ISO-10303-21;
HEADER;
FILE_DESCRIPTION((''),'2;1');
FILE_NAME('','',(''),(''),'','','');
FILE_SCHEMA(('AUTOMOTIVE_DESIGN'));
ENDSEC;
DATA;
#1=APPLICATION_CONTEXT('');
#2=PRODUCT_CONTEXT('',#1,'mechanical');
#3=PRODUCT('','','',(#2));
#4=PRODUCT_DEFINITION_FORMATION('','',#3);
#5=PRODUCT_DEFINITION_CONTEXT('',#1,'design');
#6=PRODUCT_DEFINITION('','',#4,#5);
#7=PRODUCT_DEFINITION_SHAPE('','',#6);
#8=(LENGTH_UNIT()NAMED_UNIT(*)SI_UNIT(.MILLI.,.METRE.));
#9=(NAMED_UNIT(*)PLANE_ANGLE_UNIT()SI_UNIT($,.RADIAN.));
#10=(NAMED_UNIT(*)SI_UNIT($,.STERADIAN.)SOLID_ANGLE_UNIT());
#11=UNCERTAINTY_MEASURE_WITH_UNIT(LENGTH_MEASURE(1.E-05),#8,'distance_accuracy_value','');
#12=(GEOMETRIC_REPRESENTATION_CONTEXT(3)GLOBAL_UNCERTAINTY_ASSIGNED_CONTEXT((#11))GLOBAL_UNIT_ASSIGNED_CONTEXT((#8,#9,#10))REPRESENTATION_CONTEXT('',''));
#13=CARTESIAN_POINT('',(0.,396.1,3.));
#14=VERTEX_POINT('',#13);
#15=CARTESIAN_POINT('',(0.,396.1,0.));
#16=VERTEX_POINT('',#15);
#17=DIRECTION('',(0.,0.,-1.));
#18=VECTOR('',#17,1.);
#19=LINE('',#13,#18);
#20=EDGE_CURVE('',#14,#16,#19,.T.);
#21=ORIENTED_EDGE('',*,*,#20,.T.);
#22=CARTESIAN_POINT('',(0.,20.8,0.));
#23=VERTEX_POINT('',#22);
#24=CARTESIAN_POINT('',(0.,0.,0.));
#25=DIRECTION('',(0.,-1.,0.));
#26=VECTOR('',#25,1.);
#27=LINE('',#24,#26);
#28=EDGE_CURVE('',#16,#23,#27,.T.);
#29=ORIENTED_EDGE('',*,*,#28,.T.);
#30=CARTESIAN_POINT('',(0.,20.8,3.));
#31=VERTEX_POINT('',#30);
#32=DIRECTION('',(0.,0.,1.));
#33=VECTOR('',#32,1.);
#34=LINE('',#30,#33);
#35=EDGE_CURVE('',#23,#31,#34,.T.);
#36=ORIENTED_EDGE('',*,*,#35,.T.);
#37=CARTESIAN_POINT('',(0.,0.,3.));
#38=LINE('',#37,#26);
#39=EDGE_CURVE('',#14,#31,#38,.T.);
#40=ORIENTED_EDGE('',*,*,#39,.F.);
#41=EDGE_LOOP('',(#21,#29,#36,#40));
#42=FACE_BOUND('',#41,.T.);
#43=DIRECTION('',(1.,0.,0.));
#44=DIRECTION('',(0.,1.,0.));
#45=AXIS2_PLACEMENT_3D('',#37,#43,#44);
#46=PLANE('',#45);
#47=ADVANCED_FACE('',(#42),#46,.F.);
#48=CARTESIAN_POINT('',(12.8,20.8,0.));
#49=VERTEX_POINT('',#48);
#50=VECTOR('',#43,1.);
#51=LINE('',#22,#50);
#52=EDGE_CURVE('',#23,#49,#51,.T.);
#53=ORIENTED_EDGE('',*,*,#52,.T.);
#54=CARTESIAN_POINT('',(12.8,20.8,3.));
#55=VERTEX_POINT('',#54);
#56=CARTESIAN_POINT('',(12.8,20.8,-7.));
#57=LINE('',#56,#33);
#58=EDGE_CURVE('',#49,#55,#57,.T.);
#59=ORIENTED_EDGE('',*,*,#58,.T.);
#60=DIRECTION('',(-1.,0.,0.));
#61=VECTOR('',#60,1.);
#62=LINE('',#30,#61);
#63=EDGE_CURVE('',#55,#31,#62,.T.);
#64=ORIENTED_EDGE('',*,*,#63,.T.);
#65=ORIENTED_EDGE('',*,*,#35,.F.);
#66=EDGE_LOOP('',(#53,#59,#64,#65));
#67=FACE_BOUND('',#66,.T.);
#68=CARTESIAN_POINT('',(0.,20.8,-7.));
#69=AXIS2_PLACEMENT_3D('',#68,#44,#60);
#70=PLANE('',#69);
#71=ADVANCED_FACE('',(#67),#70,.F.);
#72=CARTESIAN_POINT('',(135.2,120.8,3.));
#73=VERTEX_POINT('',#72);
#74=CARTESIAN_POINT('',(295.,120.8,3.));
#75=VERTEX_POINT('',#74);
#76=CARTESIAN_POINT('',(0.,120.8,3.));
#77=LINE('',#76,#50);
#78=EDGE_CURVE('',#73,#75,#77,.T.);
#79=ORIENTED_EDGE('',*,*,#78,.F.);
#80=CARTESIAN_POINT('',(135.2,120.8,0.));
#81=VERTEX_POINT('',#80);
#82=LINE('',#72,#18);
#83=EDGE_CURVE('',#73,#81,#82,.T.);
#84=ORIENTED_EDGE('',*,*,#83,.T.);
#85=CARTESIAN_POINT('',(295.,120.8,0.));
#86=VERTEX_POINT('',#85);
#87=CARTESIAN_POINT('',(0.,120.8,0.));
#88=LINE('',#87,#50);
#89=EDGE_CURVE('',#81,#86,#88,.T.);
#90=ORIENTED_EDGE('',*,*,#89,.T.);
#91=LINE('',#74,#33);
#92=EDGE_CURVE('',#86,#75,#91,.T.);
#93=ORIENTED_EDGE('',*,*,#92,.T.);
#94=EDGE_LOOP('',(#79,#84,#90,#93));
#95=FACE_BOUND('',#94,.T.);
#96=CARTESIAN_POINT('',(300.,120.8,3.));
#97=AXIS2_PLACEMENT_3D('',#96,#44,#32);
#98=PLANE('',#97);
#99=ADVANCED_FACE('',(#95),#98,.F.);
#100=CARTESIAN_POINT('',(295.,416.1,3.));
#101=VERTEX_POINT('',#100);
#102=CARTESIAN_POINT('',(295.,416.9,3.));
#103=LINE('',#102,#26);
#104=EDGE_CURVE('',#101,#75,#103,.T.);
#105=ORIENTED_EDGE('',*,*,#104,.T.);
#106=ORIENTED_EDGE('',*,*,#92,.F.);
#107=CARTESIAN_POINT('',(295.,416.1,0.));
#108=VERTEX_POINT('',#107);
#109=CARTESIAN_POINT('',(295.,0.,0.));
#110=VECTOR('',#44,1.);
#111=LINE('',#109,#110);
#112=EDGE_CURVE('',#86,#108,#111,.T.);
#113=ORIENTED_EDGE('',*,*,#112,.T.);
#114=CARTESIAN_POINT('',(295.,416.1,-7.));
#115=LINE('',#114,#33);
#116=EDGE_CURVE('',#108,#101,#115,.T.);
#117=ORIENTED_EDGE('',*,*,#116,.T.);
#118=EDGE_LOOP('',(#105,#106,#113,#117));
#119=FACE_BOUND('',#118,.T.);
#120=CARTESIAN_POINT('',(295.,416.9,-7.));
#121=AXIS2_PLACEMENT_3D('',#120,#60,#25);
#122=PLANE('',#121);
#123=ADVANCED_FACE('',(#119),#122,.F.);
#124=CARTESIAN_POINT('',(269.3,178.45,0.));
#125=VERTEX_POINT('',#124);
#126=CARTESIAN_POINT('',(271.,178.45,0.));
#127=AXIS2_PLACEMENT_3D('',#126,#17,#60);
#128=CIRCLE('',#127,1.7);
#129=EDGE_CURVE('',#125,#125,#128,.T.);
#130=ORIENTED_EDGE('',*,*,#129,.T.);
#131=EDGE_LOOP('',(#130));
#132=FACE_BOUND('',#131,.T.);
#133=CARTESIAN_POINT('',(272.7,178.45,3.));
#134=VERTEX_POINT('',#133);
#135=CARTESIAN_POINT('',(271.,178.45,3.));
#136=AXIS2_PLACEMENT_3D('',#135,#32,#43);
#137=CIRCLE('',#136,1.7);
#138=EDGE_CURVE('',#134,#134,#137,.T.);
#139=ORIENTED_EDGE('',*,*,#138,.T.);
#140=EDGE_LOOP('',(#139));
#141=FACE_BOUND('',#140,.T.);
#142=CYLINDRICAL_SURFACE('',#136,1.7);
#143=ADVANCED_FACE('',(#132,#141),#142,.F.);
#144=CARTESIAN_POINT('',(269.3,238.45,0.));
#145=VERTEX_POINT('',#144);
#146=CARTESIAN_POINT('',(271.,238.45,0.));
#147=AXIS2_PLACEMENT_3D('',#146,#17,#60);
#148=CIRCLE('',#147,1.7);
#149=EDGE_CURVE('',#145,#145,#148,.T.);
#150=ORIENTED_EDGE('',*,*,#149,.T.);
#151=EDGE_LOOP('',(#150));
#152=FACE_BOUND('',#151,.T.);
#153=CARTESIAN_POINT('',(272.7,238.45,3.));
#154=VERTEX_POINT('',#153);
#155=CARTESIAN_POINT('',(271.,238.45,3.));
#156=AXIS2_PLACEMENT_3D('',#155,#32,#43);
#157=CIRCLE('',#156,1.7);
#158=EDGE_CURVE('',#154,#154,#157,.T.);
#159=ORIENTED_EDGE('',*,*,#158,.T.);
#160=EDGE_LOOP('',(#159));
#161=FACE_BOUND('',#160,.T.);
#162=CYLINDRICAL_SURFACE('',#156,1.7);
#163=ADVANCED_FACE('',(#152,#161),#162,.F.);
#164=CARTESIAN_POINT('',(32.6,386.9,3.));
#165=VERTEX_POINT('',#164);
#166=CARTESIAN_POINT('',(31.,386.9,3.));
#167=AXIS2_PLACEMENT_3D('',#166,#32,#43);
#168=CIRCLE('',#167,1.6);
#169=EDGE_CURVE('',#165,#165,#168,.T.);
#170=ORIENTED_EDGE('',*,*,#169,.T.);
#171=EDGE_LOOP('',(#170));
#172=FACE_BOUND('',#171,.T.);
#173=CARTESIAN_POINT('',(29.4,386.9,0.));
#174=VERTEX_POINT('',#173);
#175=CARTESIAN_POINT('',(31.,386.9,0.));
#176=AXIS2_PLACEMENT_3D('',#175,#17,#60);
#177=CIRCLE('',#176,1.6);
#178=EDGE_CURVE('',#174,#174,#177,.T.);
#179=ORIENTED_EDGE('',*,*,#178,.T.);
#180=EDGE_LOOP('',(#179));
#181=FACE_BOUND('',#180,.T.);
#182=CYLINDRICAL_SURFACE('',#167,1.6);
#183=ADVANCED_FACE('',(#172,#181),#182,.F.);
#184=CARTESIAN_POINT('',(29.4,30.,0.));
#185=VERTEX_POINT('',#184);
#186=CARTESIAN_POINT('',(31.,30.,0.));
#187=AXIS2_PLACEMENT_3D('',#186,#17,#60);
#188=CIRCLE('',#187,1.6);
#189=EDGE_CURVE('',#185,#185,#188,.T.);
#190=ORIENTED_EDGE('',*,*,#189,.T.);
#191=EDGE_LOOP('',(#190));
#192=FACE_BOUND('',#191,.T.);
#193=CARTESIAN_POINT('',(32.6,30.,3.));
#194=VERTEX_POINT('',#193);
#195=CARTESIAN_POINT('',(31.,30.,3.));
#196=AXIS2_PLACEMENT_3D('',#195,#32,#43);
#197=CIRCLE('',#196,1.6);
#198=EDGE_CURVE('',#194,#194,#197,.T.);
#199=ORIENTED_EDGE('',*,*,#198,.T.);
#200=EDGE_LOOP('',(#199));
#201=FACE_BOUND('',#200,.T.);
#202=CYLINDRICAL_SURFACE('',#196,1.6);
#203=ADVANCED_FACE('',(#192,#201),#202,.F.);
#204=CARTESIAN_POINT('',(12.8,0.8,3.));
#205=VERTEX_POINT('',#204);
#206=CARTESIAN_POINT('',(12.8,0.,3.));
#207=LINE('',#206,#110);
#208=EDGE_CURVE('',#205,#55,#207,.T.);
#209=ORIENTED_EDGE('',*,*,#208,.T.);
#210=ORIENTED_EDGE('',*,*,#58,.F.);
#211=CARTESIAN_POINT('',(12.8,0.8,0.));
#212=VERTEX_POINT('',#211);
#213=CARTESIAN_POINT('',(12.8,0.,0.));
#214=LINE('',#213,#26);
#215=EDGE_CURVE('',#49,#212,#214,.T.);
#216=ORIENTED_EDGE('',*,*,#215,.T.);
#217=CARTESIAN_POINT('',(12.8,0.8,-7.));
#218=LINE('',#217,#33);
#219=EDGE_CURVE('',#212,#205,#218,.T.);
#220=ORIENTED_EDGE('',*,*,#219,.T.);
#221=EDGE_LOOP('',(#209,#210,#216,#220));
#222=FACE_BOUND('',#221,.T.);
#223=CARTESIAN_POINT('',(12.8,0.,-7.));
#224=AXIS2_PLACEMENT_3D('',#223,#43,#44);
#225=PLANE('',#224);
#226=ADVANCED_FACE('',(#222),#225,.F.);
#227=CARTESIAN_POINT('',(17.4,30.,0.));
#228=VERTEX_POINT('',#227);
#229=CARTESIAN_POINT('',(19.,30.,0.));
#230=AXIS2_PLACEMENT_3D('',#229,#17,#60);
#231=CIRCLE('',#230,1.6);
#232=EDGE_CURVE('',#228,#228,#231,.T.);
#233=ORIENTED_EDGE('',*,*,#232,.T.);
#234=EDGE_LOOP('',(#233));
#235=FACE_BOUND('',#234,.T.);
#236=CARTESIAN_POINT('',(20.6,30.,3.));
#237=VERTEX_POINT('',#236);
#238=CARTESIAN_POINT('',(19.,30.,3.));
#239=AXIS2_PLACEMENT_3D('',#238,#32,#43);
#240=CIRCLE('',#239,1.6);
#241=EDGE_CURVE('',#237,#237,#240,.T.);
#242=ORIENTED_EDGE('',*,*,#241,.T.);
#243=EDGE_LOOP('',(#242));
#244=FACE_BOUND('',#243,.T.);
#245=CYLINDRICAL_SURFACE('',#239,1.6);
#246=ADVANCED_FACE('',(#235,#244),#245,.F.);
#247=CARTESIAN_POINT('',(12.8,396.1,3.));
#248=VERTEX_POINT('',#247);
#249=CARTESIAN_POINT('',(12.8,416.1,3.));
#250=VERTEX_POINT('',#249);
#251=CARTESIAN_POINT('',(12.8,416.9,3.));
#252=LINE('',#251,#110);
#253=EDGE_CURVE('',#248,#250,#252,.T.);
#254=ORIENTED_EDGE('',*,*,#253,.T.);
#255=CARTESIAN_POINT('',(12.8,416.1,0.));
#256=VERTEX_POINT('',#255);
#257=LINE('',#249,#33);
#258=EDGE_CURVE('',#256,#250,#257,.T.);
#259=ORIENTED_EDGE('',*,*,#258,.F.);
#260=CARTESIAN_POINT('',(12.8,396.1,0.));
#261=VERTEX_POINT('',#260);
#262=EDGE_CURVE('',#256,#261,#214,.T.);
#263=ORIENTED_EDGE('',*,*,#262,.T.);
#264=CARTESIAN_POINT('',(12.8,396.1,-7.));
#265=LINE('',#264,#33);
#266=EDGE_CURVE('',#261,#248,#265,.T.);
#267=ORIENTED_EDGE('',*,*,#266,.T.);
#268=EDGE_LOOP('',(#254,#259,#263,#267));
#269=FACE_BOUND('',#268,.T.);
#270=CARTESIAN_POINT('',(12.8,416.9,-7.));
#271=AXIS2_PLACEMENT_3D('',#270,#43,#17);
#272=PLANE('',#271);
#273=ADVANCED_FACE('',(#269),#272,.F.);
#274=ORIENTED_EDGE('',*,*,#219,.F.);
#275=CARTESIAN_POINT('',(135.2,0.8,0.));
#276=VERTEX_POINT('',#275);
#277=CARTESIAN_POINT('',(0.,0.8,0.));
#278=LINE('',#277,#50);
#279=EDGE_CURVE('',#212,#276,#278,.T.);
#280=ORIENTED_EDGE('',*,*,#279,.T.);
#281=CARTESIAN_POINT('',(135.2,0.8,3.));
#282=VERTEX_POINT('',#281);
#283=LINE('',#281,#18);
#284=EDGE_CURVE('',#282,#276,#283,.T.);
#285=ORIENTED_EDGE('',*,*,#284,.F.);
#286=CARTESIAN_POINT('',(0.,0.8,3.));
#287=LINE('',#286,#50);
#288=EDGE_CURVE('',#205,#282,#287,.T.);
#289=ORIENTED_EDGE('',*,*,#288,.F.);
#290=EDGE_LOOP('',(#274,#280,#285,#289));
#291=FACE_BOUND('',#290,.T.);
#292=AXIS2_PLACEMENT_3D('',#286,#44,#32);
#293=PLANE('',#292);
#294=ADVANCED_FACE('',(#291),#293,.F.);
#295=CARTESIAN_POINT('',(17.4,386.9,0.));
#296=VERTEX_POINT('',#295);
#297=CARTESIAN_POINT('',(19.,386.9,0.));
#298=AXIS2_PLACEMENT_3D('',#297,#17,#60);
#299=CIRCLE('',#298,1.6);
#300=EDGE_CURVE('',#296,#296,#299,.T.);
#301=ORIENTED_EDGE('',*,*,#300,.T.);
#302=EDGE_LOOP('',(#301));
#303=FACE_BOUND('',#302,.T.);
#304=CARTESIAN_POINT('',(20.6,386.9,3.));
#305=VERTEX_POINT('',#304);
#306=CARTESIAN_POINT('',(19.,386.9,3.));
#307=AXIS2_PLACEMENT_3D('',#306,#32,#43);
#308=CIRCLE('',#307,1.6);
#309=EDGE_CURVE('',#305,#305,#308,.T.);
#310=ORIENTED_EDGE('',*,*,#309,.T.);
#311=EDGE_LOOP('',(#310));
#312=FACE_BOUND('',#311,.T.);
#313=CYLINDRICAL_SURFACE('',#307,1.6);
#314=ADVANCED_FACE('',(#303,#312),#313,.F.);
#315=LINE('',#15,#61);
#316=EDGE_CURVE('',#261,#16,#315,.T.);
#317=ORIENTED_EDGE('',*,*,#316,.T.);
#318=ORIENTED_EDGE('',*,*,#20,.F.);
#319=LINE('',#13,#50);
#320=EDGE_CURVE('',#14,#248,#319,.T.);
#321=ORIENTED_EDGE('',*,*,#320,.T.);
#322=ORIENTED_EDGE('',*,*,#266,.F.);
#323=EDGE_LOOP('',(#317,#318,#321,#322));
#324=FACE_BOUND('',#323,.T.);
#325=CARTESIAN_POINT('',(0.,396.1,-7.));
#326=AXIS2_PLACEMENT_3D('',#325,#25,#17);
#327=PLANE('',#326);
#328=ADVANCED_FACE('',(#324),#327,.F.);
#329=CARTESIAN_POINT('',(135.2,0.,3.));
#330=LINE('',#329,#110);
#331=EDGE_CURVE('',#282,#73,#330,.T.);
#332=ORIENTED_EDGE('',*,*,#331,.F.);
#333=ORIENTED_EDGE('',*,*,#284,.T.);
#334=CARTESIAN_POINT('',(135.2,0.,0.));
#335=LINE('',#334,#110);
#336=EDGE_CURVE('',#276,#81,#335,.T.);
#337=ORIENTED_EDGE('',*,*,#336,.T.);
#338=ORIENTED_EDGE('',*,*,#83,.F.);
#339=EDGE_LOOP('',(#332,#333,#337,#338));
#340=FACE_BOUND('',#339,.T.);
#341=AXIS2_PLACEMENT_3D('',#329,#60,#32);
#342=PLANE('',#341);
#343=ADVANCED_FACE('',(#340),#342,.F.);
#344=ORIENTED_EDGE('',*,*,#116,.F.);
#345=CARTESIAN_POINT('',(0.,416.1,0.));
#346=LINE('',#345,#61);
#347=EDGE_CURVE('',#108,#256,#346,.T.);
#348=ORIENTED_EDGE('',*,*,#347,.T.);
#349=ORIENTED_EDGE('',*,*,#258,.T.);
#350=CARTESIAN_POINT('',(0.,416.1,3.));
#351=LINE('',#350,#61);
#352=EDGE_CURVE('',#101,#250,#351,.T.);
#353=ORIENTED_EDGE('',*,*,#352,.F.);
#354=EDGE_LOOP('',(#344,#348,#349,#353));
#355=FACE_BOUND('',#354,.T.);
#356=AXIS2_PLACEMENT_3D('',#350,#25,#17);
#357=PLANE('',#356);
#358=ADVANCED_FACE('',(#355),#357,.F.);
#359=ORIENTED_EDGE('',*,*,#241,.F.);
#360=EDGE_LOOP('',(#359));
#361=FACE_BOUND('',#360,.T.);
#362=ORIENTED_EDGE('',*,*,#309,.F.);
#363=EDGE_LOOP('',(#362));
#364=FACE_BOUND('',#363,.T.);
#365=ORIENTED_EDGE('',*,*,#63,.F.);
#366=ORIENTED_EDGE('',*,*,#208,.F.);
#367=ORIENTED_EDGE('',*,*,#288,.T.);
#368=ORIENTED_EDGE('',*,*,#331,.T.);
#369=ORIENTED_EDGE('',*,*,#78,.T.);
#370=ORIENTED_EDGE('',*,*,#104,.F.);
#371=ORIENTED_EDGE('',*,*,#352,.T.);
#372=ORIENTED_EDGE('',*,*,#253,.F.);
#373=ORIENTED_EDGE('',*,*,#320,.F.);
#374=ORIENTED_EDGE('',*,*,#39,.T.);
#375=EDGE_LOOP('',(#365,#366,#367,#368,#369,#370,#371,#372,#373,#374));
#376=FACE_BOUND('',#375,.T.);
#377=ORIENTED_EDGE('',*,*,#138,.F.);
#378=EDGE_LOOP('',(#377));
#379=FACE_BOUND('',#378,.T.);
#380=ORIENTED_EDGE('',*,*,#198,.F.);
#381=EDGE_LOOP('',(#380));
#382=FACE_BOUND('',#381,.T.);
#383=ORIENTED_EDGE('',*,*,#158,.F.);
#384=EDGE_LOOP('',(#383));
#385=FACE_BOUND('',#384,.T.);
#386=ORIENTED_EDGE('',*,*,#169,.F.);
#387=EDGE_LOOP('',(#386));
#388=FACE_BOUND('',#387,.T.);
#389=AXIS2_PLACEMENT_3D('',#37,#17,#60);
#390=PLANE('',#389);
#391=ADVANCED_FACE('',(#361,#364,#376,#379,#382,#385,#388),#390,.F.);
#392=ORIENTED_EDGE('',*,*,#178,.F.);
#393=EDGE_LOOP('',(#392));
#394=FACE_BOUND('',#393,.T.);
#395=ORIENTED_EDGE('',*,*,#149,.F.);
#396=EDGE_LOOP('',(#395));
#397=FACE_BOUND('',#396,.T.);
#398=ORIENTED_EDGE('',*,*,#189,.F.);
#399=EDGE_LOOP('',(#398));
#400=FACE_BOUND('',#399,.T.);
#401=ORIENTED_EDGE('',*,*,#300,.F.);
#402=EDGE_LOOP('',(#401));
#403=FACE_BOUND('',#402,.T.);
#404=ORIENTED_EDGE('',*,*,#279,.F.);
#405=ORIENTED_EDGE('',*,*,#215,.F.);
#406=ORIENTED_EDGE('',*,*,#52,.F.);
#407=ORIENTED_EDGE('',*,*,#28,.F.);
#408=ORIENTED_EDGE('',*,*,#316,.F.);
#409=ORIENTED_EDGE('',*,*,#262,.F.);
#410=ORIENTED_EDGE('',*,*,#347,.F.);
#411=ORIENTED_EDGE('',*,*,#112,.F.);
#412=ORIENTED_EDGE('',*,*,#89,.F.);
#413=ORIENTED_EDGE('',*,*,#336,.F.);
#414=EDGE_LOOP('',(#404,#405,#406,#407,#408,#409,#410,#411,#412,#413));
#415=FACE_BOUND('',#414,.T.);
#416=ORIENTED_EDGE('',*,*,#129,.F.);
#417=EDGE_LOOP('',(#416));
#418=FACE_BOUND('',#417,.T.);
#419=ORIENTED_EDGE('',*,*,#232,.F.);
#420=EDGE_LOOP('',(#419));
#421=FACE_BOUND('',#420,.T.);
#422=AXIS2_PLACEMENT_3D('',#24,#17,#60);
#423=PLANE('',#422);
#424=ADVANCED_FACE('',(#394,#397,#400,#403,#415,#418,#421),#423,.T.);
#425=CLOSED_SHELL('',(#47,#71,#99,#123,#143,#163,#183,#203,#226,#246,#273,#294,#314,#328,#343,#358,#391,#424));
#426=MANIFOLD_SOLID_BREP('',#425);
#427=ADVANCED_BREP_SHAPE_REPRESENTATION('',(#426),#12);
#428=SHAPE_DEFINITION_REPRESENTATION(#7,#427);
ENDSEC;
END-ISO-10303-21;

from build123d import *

# Parameters (mm, degrees)
BOSS_EXTRUDE1_DEPTH          = 3
SKETCH2_W                    = 10
SKETCH2_H                    = 416.9
BOSS_EXTRUDE2_DEPTH          = 0.1
CUT_EXTRUDE1_DEPTH           = 10
M3_CLEARANCE_HOLE1_OUTLINE_R = 1.6
M3_CLEARANCE_HOLE1_DEPTH     = 3
M3_CLEARANCE_HOLE2_OUTLINE_R = 1.7
M3_CLEARANCE_HOLE2_DEPTH     = 3
SKETCH6_W                    = 5
SKETCH6_H                    = 296.9
CUT_EXTRUDE2_DEPTH           = 10
MOVE_FACE1_BY                = 0.8
MOVE_FACE1_2_BY              = 0.8
MOVE_FACE1_3_BY              = 0.8
MOVE_FACE1_4_BY              = 0.8
MOVE_FACE1_5_BY              = 0.8
MOVE_FACE1_6_BY              = 0.8
MOVE_FACE1_7_BY              = 0.8
MOVE_FACE1_8_BY              = 0.8


# Read off the part's stored shape, not the designer's step: M3 Clearance Hole1, M3 Clearance Hole2
with BuildPart() as part:
    # Sketch1 → Boss-Extrude1 (new body)
    with BuildSketch(Plane.XY):
        Polygon((0, 0), (136, 0), (136, 120), (300, 120), (300, 416.9), (0, 416.9), align=None)
    extrude(amount=BOSS_EXTRUDE1_DEPTH)


with BuildPart() as body_2:
    # Sketch2 → Boss-Extrude2 (new body)
    with BuildSketch(Plane.XY):
        with Locations((1, 208.45)):
            Rectangle(SKETCH2_W, SKETCH2_H)
    extrude(amount=-BOSS_EXTRUDE2_DEPTH)


with BuildPart() as cut_extrude1_tool:
    # Sketch3 → Cut-Extrude1 (new body)
    with BuildSketch(Plane.XY.offset(3)):
        Polygon((0, 416.9), (-4, 416.9), (-4, 396.9), (0, 396.9), (12, 396.9), (12, 416.9), align=None)
        Polygon((0, 0), (12, 0), (12, 20), (0, 20), (-4, 20), (-4, 0), align=None)
    extrude(amount=-CUT_EXTRUDE1_DEPTH)


with BuildPart() as part_1:
    add(part.part)

    # Cut-Extrude1: cut by cut_extrude1_tool
    add(cut_extrude1_tool.part, mode=Mode.SUBTRACT)

    # M3 Clearance Hole1 outline → M3 Clearance Hole1 (cut)
    with BuildSketch(Plane.XY):
        with Locations((31, 30)):
            Circle(M3_CLEARANCE_HOLE1_OUTLINE_R)
        with Locations((19, 30)):
            Circle(M3_CLEARANCE_HOLE1_OUTLINE_R)
        with Locations((31, 386.9)):
            Circle(M3_CLEARANCE_HOLE1_OUTLINE_R)
        with Locations((19, 386.9)):
            Circle(M3_CLEARANCE_HOLE1_OUTLINE_R)
    extrude(amount=M3_CLEARANCE_HOLE1_DEPTH, mode=Mode.SUBTRACT)

    # M3 Clearance Hole2 outline → M3 Clearance Hole2 (cut)
    with BuildSketch(Plane.XY):
        with Locations((271, 178.45)):
            Circle(M3_CLEARANCE_HOLE2_OUTLINE_R)
        with Locations((271, 238.45)):
            Circle(M3_CLEARANCE_HOLE2_OUTLINE_R)
    extrude(amount=M3_CLEARANCE_HOLE2_DEPTH, mode=Mode.SUBTRACT)

    # Sketch6 → Cut-Extrude2 (cut)
    with BuildSketch(Plane.XY.offset(3)):
        with Locations((297.5, 268.45)):
            Rectangle(SKETCH6_W, SKETCH6_H)
    extrude(amount=-CUT_EXTRUDE2_DEPTH, mode=Mode.SUBTRACT)

    # Move Face1: a face moved inward by 0.8
    extrude(part_1.faces().sort_by_distance((215.5, 120, 1.5))[0], amount=MOVE_FACE1_BY, dir=(0, 1, 0), mode=Mode.SUBTRACT)

    # Move Face1 2: a face moved inward by 0.8
    extrude(part_1.faces().sort_by_distance((136, 60, 1.5))[0], amount=MOVE_FACE1_2_BY, dir=(-1, 0, 0), mode=Mode.SUBTRACT)

    # Move Face1 3: a face moved inward by 0.8
    extrude(part_1.faces().sort_by_distance((74, 0, 1.5))[0], amount=MOVE_FACE1_3_BY, dir=(0, 1, 0), mode=Mode.SUBTRACT)

    # Move Face1 4: a face moved inward by 0.8
    extrude(part_1.faces().sort_by_distance((12, 10, 1.5))[0], amount=MOVE_FACE1_4_BY, dir=(1, 0, 0), mode=Mode.SUBTRACT)

    # Move Face1 5: a face moved inward by 0.8
    extrude(part_1.faces().sort_by_distance((6, 20, 1.5))[0], amount=MOVE_FACE1_5_BY, dir=(0, 1, 0), mode=Mode.SUBTRACT)

    # Move Face1 6: a face moved inward by 0.8
    extrude(part_1.faces().sort_by_distance((153.5, 416.9, 1.5))[0], amount=MOVE_FACE1_6_BY, dir=(0, -1, 0), mode=Mode.SUBTRACT)

    # Move Face1 7: a face moved inward by 0.8
    extrude(part_1.faces().sort_by_distance((12, 406.9, 1.5))[0], amount=MOVE_FACE1_7_BY, dir=(1, 0, 0), mode=Mode.SUBTRACT)

    # Move Face1 8: a face moved inward by 0.8
    extrude(part_1.faces().sort_by_distance((6, 396.9, 1.5))[0], amount=MOVE_FACE1_8_BY, dir=(0, -1, 0), mode=Mode.SUBTRACT)


with BuildPart() as body_2_1:
    add(body_2.part)

    # Cut-Extrude1: cut by cut_extrude1_tool
    add(cut_extrude1_tool.part, mode=Mode.SUBTRACT)


solid = part_1.part
